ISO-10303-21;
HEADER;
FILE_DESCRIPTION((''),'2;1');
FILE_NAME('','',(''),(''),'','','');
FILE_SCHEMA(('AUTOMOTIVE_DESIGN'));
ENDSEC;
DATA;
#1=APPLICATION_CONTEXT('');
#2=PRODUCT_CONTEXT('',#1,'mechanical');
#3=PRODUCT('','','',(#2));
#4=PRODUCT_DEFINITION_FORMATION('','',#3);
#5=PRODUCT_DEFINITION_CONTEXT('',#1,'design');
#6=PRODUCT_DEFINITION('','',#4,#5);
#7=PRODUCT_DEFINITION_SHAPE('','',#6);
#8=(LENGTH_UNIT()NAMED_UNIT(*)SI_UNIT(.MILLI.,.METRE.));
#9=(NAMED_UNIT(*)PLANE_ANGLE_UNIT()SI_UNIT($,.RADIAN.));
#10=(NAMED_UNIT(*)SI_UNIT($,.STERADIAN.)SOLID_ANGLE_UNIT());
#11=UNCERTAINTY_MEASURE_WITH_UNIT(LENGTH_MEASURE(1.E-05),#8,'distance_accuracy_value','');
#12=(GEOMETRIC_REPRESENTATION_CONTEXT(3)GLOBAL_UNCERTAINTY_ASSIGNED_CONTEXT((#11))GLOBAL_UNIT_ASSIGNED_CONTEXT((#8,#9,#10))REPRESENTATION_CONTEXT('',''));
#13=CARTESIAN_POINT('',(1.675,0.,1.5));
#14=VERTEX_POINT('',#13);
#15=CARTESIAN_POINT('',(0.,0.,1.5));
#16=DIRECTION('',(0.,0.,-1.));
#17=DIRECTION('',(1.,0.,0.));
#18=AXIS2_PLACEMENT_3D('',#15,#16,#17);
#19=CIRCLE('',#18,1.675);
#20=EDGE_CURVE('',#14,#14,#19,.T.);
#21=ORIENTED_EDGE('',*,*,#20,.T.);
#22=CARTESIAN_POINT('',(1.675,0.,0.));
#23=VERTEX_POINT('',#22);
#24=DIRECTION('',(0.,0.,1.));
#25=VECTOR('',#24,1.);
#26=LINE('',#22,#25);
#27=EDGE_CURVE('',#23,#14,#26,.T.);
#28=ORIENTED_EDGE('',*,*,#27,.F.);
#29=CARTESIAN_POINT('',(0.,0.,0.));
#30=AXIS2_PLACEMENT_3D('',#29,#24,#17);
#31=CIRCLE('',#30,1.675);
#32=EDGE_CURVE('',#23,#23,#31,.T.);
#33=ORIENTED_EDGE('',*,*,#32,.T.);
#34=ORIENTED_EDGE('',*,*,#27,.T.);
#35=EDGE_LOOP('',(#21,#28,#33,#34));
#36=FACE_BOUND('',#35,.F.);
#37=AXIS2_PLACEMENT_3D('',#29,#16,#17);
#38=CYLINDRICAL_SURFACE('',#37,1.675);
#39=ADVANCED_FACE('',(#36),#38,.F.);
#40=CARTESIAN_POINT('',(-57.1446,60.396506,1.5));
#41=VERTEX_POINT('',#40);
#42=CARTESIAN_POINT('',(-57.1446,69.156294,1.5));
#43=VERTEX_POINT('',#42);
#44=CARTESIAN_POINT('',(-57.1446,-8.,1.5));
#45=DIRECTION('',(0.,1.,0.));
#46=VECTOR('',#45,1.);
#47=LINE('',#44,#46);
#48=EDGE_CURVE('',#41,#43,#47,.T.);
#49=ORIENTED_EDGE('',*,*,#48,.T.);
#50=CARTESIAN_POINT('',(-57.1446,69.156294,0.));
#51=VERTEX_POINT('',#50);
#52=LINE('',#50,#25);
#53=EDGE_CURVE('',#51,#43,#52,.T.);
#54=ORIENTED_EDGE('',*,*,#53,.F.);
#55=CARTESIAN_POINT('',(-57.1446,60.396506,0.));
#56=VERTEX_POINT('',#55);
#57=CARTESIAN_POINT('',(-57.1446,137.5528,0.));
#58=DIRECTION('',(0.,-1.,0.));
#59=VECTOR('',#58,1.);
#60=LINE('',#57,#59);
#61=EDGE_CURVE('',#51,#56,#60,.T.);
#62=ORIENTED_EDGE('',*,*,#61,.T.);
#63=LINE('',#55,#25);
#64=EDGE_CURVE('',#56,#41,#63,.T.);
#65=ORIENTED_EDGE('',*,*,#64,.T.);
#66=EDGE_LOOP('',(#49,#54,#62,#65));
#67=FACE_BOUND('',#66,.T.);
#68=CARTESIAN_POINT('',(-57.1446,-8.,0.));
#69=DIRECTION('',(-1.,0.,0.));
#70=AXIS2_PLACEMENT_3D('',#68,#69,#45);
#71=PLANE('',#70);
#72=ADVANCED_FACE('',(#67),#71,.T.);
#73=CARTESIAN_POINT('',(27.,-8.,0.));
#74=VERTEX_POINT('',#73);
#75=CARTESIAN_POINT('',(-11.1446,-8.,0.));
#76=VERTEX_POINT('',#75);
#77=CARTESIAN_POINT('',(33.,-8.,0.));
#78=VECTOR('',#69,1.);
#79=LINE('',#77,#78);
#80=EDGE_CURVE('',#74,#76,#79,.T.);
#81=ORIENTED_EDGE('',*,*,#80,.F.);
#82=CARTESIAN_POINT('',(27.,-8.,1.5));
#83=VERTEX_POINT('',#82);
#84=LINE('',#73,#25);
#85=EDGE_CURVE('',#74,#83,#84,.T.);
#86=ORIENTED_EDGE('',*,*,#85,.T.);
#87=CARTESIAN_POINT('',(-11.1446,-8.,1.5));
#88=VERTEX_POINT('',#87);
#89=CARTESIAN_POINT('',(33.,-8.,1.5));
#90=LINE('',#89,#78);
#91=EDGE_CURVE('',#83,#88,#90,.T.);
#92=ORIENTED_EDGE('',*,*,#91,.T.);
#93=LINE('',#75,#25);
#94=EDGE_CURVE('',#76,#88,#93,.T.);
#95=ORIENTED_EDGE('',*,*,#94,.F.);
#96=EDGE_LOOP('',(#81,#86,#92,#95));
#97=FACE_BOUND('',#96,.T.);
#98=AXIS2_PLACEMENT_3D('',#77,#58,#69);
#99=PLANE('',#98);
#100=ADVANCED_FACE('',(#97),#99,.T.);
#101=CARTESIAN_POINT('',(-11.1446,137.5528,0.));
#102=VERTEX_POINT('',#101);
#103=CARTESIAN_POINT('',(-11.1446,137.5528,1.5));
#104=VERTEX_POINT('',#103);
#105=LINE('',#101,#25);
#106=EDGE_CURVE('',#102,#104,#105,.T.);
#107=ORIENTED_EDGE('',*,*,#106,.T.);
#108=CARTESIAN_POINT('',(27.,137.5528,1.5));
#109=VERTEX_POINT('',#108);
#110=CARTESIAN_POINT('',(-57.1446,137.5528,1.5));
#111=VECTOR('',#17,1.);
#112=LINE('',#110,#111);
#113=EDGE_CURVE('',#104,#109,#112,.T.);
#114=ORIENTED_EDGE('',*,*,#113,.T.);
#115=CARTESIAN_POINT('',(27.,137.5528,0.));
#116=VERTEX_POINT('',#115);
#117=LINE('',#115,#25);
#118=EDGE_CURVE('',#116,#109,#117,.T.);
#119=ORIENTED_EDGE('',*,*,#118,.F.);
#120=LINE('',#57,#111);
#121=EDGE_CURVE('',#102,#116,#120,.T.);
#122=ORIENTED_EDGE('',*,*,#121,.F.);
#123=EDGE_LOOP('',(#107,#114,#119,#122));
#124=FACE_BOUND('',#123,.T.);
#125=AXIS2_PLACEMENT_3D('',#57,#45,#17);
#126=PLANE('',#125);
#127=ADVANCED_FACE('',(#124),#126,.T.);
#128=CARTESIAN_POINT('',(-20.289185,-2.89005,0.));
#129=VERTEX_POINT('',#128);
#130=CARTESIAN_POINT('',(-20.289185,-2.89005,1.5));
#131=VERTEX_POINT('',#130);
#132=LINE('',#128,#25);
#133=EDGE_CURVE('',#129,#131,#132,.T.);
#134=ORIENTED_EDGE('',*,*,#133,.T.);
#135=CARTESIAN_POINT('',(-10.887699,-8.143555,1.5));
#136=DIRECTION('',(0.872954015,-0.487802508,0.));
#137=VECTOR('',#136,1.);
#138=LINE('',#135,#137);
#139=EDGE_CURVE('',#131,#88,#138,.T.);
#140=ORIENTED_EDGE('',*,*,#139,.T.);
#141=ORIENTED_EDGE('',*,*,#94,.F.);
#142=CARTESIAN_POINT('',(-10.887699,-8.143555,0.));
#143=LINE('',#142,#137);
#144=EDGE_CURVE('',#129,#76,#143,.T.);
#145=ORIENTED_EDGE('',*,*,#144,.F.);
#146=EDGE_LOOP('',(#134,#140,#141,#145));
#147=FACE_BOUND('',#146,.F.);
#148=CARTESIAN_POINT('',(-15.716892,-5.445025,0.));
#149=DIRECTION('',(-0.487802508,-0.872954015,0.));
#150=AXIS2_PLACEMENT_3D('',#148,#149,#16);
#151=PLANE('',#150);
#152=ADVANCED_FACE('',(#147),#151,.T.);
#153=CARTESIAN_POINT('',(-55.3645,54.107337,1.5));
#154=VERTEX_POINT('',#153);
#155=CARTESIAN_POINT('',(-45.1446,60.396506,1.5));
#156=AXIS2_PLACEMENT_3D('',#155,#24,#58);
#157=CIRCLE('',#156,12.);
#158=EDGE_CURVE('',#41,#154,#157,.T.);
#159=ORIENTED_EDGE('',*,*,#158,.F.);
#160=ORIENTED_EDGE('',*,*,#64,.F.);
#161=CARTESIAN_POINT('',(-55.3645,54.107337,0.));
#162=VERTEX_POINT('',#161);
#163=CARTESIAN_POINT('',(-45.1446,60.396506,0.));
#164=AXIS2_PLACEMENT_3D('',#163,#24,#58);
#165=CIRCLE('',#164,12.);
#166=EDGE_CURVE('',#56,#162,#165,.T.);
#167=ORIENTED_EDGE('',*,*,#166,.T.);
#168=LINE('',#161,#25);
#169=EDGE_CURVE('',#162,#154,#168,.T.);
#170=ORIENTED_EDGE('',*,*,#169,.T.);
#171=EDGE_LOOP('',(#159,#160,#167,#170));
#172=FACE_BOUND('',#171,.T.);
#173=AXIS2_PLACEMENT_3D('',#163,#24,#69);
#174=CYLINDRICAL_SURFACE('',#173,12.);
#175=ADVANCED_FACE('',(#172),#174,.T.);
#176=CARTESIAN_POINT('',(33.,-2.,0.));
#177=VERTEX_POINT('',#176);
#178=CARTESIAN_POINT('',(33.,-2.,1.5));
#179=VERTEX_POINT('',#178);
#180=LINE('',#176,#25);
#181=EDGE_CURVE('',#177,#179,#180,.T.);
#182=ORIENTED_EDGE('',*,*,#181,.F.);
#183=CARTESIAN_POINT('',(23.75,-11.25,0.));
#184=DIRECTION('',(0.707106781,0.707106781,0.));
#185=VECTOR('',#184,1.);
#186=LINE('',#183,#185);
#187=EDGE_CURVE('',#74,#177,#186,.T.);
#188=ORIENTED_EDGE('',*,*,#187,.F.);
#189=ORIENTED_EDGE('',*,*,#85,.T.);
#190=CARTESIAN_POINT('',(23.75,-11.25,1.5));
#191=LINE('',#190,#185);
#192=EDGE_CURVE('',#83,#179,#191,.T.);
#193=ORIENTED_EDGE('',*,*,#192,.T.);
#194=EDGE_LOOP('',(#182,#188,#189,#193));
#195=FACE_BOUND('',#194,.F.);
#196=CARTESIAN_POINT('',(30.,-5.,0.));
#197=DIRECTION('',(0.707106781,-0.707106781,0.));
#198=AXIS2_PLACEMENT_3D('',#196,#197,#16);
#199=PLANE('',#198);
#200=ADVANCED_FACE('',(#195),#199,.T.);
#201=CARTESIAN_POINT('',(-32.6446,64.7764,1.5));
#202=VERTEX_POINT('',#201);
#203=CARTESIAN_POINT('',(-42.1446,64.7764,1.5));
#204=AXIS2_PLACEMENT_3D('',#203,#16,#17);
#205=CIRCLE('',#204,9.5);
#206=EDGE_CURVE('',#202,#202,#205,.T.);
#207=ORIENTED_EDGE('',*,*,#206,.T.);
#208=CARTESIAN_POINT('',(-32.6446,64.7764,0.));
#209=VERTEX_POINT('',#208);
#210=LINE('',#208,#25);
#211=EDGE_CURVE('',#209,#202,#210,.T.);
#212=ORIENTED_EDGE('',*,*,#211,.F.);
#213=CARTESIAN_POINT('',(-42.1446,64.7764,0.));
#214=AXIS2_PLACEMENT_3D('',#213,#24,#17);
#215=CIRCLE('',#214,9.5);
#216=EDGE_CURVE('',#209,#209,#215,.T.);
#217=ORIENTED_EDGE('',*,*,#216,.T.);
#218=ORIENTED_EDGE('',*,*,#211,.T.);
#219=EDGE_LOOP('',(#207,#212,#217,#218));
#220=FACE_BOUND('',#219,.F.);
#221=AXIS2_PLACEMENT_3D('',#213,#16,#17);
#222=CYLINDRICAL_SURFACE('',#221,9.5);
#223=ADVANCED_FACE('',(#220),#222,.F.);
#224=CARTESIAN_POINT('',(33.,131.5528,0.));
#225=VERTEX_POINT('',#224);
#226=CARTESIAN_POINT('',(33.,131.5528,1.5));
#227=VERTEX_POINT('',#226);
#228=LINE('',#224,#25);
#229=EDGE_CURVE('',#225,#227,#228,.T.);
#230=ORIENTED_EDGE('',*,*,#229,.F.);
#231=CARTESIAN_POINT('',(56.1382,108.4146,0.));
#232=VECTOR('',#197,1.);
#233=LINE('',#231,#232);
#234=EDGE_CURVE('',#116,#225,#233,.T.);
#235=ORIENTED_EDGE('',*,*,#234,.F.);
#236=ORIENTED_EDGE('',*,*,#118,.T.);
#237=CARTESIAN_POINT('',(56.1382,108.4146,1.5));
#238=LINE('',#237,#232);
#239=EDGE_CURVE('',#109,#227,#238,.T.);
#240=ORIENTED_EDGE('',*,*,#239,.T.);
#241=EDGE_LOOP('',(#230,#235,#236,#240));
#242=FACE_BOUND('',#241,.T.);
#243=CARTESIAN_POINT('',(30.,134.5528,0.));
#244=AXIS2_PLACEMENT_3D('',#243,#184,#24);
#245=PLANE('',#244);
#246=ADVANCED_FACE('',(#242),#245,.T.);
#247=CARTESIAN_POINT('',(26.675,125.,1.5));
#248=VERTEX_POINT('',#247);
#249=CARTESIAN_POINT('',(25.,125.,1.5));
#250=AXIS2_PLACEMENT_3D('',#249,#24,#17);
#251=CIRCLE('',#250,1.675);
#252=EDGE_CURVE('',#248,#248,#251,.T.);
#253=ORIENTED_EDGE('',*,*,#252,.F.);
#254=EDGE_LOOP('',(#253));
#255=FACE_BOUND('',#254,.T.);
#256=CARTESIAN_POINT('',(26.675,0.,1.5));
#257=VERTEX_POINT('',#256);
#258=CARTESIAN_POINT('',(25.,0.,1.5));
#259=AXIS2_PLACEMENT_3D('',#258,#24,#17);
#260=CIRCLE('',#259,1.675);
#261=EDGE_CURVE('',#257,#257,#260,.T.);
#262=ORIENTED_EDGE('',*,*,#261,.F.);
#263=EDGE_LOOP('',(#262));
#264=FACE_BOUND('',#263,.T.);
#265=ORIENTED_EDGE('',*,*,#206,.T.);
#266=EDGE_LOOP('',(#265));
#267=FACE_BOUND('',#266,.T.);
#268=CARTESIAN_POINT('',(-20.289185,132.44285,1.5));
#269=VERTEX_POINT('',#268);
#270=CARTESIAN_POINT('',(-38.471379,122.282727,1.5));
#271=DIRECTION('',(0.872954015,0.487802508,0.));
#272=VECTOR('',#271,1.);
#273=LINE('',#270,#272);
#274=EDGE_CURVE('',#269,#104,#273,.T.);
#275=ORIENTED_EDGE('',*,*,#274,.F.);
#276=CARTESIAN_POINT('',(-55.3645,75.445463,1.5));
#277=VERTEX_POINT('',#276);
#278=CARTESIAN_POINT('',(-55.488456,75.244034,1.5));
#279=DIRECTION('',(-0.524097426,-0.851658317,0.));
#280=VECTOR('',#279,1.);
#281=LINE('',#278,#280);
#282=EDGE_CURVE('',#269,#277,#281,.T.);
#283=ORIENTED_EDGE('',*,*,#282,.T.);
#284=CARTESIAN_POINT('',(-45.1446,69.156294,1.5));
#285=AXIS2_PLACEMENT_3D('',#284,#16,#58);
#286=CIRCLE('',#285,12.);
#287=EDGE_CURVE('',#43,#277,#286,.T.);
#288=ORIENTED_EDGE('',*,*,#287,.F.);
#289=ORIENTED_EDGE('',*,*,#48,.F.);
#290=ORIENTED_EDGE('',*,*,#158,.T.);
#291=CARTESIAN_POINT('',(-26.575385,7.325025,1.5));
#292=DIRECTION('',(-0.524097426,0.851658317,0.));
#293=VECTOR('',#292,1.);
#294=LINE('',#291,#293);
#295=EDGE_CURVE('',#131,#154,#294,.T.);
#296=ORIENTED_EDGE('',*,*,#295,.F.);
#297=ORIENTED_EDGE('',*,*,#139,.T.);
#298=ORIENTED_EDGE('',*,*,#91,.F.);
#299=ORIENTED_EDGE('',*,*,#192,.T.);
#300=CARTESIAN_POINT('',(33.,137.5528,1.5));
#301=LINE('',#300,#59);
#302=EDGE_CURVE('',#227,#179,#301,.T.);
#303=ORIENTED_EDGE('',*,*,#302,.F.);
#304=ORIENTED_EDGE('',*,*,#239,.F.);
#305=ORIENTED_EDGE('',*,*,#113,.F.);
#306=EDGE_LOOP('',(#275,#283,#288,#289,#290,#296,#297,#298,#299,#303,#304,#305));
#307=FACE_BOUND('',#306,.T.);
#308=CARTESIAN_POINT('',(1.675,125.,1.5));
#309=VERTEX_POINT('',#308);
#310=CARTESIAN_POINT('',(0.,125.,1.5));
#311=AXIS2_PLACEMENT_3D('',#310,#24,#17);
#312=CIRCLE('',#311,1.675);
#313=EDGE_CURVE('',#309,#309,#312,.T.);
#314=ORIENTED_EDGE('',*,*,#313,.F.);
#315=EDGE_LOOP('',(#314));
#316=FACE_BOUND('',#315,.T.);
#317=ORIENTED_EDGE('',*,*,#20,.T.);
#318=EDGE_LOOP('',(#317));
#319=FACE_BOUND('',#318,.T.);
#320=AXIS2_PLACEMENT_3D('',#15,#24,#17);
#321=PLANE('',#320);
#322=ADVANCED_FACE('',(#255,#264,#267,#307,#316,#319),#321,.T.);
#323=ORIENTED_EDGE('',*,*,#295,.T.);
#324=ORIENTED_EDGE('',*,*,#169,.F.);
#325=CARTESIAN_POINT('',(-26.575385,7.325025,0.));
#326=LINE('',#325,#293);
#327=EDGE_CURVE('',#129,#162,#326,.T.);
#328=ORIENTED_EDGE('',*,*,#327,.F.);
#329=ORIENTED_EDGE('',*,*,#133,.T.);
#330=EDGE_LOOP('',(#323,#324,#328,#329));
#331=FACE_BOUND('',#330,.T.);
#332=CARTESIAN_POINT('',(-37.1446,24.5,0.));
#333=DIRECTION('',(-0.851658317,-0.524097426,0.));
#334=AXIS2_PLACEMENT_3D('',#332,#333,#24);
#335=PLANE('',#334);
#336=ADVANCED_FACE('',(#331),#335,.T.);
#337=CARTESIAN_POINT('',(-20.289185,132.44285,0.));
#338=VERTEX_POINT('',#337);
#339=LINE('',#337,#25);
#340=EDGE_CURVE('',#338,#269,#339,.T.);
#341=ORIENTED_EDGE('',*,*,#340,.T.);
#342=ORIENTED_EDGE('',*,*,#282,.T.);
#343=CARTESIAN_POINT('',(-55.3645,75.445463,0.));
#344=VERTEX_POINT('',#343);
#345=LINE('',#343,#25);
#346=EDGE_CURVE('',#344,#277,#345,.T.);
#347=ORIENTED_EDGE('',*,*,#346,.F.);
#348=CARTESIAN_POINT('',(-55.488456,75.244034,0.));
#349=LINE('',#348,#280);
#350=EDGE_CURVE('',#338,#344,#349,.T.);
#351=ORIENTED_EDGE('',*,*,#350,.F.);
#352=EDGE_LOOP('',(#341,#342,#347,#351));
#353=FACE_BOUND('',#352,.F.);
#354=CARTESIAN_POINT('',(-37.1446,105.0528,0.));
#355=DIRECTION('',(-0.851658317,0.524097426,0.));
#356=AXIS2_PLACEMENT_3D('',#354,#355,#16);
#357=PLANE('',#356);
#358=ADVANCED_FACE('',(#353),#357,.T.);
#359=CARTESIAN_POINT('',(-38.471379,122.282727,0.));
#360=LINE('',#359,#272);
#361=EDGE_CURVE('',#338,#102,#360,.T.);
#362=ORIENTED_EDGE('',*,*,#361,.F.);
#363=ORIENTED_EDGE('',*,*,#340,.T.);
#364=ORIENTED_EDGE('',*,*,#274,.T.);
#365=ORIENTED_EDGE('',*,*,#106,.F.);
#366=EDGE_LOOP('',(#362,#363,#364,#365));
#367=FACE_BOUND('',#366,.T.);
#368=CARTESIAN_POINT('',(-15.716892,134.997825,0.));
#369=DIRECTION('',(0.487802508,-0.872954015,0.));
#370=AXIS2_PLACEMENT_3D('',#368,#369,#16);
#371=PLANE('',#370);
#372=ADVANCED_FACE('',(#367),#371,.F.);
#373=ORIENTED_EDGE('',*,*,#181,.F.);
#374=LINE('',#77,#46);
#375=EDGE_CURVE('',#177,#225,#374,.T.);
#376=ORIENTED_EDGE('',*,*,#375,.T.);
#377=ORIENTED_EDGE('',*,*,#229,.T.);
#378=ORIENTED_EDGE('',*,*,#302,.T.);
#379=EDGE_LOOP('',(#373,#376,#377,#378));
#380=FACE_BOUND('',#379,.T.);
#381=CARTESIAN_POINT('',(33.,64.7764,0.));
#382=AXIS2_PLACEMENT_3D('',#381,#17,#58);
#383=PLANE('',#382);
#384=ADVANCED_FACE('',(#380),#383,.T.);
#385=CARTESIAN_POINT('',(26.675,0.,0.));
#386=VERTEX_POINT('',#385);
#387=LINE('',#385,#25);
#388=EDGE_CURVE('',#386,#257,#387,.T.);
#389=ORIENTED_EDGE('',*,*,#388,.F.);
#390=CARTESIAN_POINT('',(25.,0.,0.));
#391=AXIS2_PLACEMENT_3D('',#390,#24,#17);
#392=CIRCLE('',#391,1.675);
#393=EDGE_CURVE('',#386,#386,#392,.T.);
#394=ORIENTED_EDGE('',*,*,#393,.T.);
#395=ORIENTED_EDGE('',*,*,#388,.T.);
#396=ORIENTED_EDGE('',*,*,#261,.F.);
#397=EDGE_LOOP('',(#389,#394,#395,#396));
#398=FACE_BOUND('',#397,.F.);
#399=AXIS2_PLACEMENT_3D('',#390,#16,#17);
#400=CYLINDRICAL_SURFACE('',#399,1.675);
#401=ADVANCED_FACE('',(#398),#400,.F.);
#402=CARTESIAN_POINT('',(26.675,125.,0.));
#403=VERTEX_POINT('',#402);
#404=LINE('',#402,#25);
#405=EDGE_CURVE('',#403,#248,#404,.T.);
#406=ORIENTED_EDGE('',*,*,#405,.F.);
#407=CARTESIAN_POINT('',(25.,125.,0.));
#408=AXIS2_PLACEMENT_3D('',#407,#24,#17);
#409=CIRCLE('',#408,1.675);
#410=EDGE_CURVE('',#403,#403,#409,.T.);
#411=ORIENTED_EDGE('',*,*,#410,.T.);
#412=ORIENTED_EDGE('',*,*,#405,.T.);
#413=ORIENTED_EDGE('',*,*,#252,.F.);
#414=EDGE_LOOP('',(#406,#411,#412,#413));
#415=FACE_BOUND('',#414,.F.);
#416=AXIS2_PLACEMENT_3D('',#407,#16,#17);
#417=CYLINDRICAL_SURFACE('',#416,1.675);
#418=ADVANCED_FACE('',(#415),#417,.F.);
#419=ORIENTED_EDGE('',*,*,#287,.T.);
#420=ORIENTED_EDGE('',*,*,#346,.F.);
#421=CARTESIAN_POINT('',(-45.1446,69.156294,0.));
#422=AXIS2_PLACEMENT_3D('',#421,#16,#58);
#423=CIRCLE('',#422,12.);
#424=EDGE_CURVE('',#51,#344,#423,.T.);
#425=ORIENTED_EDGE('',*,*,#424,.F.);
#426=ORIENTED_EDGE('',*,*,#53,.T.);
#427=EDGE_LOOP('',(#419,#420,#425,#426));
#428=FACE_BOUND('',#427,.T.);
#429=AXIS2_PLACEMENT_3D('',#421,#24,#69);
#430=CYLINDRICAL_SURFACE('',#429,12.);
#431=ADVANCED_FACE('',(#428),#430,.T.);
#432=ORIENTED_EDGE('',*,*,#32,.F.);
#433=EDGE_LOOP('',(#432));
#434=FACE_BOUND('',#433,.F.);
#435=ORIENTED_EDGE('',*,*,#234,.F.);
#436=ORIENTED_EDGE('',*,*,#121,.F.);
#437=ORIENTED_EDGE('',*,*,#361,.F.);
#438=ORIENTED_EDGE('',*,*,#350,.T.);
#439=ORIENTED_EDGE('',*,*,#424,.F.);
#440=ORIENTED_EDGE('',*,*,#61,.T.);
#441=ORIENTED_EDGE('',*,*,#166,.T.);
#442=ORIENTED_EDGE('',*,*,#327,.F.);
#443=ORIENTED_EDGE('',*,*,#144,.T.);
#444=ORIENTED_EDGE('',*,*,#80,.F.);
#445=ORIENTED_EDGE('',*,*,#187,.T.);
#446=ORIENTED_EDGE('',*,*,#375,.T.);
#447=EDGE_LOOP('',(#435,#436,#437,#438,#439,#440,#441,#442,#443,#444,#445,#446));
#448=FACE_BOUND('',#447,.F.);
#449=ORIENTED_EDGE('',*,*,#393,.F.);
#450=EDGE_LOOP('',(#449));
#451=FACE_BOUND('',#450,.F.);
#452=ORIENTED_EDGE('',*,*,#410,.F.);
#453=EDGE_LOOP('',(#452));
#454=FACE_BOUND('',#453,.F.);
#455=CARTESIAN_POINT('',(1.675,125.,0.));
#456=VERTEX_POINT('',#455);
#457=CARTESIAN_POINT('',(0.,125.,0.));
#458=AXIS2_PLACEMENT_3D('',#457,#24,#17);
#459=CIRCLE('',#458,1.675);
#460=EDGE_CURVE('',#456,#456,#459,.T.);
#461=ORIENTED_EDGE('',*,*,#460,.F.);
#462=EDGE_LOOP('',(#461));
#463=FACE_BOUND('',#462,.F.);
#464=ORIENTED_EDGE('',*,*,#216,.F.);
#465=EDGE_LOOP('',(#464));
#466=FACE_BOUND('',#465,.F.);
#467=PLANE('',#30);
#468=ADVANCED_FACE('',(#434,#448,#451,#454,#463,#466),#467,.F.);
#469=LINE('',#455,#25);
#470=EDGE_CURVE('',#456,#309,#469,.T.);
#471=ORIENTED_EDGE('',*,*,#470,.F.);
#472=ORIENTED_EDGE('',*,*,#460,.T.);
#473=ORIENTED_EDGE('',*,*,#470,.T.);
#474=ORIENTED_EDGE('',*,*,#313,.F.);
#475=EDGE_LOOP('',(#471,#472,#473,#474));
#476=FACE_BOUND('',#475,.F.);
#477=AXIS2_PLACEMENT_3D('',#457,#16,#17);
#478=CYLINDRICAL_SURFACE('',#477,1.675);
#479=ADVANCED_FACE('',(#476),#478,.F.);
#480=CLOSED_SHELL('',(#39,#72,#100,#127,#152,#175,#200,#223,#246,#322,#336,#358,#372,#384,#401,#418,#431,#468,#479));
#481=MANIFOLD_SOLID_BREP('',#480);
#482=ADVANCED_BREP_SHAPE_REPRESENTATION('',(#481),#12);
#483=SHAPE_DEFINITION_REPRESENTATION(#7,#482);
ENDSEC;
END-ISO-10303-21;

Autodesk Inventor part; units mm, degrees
ref_plane "YZ Plane" through (0, 0, 0) normal (1, 0, 0) x (0, 1, 0)
ref_plane "XZ Plane" through (0, 0, 0) normal (0, 1, 0) x (-1, 0, 0)
ref_plane "XY Plane" through (0, 0, 0) normal (0, 0, 1) x (1, 0, 0)
sketch "Sketch1" plane through (0, 0, 0) normal (0, 0, 1) x (1, 0, 0)
  circle A0 centre (0, 0) radius 1.675
  circle A1 centre (25, 0) radius 1.675
  line L0 (0, 0) -> (0, 1.675)
  circle A2 centre (0, 125) radius 1.675
  circle A3 centre (25, 125) radius 1.675
  line L1 (33, -8) -> (-57.1446, -8)
  line L2 (-57.1446, -8) -> (-57.1446, 137.5528)
  line L3 (-57.1446, 137.5528) -> (33, 137.5528)
  line L4 (33, 137.5528) -> (33, -8)
  line L5 (-57.1446, 64.7764) -> (33, 64.7764)
  circle A4 centre (-42.1446, 64.7764) radius 9.5
  point P0 (0, 126.675)
  dimension "d0" = 3.35
  dimension "d1" = 3.35
  dimension "d2" = 25
  dimension "d5" = 125
  dimension "d10" = 8
  dimension "d11" = 8
  dimension "d12" = 12.5528
  dimension "d13" = 19
  dimension "d14" = 15
extrude "Plate1" add sketch "Sketch1" along normal blind 1.5 contours L1 L2 L5 A4 L4 | L5 A4 L2 L3 L4
chamfer "Corner Chamfer1" distance 40 distance2 65 1 edges at (-57.1446, 137.5528, 0.75) measured on face at (2.9518, 137.5528, 0.5)
chamfer "Corner Chamfer2" distance 40 distance2 65 1 edges at (-57.1446, -8, 0.75) measured on face at (-27.0964, -8, 0.5)
fillet "Corner Round1" radius 12 2 edges at (-57.1446, 72.5528, 0.75) (-57.1446, 57, 0.75)
chamfer "Corner Chamfer3" distance 6 angle 45 4 edges at (33, 137.5528, 0.75) (-17.1446, 137.5528, 0.75) (-17.1446, -8, 0.75) (33, -8, 0.75)
equation "\"d0\" = rivet_diameter"
equation "\"d1\" = rivet_diameter"
equation "\"d15\" = Thickness"
equation "\"d5\" = 0.5 * rivet_displacement"
equation "\"Thickness\" = plate_thickness"
equation "\"BendRadius\" = Thickness"
equation "\"BendReliefWidth\" = Thickness"
equation "\"BendReliefDepth\" = 0.5 * Thickness"
equation "\"CornerReliefSize\" = 4 * Thickness"
equation "\"MinimumRemnant\" = 2 * Thickness"
equation "\"TransitionRadius\" = BendRadius"
equation "\"JacobiRadiusSize\" = BendRadius"
equation "\"GapSize\" = Thickness"
equation "\"A_joint_diameter\" = 16"
equation "\"A_B_spacing\" = 2"
equation "\"A_joint_tolerance\" = 3"
equation "\"l___________\" = 0"
equation "\"l__________\" = 0"
equation "\"l_________\" = 0"
equation "\"rivet_diameter\" = 3.35"
equation "\"plate_thickness\" = 1.5"
equation "\"l________\" = 0"
equation "\"L_Piston_Top\" = 25"
equation "\"L_Piston_Bottom\" = 21"
equation "\"rivet_displacement\" = 250"
properties part number "Piston_A_beam_hinge"
